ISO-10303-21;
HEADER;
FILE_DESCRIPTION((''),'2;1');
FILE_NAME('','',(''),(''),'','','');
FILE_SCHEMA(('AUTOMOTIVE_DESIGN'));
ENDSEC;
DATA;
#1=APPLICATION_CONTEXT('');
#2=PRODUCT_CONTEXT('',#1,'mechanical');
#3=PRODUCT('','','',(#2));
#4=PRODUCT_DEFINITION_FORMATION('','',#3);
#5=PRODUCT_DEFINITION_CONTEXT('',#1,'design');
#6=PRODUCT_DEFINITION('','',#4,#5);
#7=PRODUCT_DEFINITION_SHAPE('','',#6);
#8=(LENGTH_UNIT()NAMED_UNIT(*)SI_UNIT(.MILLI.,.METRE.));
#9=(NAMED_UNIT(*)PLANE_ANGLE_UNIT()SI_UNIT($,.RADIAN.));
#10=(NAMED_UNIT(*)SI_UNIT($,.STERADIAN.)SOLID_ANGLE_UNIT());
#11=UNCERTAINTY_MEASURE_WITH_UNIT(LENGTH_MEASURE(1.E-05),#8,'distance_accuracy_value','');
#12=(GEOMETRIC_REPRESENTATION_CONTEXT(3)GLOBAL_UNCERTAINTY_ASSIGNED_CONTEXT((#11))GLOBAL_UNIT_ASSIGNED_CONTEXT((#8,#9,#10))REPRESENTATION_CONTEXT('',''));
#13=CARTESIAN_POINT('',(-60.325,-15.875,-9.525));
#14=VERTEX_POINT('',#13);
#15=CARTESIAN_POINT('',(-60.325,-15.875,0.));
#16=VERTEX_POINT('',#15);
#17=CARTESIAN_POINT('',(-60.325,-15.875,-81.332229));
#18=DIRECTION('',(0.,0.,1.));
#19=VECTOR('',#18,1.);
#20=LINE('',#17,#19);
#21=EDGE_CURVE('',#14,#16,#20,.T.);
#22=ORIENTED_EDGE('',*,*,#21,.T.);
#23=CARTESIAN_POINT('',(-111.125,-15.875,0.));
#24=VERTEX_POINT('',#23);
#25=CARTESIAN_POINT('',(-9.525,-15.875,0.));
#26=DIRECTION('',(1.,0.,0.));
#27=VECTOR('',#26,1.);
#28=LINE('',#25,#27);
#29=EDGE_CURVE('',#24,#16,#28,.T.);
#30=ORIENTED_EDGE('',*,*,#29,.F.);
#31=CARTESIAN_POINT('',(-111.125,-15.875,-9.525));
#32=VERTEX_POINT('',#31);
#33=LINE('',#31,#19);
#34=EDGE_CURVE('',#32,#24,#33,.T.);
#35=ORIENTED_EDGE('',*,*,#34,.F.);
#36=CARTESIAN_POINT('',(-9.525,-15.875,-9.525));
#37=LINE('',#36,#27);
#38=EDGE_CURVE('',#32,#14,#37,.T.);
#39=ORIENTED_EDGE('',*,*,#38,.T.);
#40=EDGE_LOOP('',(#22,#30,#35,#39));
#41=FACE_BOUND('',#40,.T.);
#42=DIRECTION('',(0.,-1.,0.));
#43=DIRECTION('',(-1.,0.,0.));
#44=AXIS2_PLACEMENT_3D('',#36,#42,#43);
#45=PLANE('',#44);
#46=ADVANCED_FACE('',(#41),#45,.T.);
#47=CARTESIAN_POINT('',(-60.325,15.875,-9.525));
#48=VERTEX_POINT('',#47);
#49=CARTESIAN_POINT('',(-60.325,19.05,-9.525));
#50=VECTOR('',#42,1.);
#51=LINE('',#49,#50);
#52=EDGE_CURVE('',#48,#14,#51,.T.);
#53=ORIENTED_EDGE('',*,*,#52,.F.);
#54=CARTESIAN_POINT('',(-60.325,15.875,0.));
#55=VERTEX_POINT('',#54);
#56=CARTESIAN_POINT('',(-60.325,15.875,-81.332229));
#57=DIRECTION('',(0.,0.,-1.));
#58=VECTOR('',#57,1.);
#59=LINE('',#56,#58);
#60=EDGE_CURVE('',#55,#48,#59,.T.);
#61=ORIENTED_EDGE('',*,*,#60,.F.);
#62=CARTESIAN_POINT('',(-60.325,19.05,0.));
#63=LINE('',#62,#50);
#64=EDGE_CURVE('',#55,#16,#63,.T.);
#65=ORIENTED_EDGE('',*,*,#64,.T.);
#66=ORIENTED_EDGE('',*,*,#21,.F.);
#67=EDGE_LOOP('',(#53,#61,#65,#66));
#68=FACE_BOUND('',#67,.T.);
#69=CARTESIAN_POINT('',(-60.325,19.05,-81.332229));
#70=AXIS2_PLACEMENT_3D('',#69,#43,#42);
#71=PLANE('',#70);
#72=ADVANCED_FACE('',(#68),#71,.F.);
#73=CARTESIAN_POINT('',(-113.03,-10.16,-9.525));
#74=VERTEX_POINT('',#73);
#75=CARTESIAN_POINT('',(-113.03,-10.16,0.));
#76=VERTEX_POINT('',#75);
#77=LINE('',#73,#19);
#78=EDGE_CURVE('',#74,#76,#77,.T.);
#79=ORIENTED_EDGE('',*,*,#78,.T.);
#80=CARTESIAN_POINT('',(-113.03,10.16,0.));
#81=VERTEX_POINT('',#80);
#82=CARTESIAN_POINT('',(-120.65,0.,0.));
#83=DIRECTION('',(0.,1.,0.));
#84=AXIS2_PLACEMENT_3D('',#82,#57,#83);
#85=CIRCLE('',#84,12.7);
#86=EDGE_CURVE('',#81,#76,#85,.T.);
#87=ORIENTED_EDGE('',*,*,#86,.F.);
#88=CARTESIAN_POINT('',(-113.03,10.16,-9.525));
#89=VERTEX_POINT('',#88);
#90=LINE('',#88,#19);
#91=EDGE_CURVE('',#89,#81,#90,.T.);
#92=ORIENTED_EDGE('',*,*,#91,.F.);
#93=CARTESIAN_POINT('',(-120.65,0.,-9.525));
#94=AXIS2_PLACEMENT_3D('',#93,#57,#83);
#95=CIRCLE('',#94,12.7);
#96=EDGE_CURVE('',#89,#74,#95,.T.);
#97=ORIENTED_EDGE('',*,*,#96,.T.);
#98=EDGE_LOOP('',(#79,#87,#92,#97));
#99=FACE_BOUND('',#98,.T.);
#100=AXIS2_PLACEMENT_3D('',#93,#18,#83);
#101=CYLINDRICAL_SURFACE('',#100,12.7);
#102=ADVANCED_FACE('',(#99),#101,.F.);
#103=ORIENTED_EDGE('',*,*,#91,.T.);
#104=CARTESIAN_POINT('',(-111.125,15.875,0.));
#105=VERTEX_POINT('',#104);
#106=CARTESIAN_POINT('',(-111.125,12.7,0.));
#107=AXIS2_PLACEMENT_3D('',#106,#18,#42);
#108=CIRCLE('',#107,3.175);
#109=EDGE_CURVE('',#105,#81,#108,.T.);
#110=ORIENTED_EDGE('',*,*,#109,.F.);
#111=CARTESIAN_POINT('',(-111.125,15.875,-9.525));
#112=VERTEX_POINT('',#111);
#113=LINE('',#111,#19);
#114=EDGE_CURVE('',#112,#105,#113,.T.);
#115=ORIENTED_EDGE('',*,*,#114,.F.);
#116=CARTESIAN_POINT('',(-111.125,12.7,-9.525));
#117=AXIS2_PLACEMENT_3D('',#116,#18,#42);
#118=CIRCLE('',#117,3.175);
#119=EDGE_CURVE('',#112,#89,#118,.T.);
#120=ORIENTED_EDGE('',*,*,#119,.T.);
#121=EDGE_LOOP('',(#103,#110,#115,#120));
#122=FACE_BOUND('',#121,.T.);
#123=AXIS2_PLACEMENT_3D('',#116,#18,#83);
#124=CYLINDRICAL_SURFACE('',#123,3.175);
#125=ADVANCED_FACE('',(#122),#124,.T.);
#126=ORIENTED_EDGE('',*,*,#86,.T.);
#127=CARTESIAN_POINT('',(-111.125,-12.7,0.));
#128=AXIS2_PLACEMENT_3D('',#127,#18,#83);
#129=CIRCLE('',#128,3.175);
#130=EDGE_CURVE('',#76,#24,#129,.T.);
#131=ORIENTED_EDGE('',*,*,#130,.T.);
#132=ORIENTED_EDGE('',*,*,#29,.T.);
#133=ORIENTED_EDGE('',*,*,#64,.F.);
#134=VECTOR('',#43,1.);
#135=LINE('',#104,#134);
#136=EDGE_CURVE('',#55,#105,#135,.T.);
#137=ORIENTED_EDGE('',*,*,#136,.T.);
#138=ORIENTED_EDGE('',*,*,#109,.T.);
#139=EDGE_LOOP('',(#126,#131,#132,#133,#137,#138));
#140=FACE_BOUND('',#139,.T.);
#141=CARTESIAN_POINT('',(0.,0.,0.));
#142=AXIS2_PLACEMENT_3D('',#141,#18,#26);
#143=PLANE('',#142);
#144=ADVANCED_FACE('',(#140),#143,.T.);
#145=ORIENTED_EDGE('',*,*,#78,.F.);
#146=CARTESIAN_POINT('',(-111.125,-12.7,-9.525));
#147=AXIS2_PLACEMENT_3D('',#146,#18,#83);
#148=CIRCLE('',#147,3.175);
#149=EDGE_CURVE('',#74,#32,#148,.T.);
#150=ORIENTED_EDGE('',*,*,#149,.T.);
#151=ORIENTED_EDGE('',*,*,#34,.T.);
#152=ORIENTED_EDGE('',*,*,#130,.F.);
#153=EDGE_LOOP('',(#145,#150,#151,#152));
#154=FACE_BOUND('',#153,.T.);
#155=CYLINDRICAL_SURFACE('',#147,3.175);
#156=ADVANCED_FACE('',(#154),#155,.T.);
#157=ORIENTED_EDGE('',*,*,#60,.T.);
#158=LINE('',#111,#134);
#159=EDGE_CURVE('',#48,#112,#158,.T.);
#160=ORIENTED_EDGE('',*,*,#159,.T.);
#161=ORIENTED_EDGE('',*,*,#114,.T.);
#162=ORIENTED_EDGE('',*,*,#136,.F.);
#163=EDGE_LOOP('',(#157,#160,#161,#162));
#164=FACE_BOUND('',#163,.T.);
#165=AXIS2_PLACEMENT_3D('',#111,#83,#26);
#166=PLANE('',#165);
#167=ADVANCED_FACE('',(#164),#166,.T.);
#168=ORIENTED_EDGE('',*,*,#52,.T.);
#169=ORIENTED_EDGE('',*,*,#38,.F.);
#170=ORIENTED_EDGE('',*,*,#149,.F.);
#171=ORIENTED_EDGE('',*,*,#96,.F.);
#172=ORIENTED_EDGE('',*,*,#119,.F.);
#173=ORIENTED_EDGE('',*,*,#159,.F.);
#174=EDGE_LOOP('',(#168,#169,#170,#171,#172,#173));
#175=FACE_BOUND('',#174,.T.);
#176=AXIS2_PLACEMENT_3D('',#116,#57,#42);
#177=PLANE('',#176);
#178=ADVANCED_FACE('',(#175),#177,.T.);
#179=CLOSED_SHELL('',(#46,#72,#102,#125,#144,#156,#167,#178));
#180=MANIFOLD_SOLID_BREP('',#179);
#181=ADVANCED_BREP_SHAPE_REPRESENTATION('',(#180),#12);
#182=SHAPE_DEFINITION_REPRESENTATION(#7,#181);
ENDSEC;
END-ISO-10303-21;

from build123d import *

# Parameters (mm, degrees)
BOSS_EXTRUDE1_DEPTH = 9.525
CAVITY1_START       = -9.525
CAVITY1_DEPTH       = 9.525


# Read off the part's stored shape, not the designer's step: Cavity1
with BuildPart() as part:
    # Sketch1 → Boss-Extrude1 (new body)
    with BuildSketch(Plane.XY):
        Polygon((-114.3, 19.05), (-60.325, 19.05), (-60.325, -19.05), (-114.3, -19.05), (-121.190985561, -19.05), (-111.454402918, 0), (-121.190985561, 19.05), align=None)
    extrude(amount=-BOSS_EXTRUDE1_DEPTH)

    # Cavity1 outline → Cavity1 (cut)
    with BuildSketch(Plane.XY.offset(CAVITY1_START)):
        with BuildLine():
            Line((-111.125, 15.875), (-60.325, 15.875))
            Line((-60.325, 15.875), (-60.325, 19.05))
            Line((-60.325, 19.05), (-121.190985561, 19.05))
            Line((-121.190985561, 19.05), (-111.454402918, 0))
            Line((-111.454402918, 0), (-121.190985561, -19.05))
            Line((-121.190985561, -19.05), (-60.325, -19.05))
            Line((-60.325, -19.05), (-60.325, -15.875))
            Line((-60.325, -15.875), (-111.125, -15.875))
            ThreePointArc((-111.125, -15.875), (-114.137069471, -13.704023157), (-113.03, -10.16))
            ThreePointArc((-113.03, -10.16), (-107.95, 0), (-113.03, 10.16))
            ThreePointArc((-113.03, 10.16), (-114.137069471, 13.704023157), (-111.125, 15.875))
        make_face()
    extrude(amount=CAVITY1_DEPTH, mode=Mode.SUBTRACT)


solid = part.part
